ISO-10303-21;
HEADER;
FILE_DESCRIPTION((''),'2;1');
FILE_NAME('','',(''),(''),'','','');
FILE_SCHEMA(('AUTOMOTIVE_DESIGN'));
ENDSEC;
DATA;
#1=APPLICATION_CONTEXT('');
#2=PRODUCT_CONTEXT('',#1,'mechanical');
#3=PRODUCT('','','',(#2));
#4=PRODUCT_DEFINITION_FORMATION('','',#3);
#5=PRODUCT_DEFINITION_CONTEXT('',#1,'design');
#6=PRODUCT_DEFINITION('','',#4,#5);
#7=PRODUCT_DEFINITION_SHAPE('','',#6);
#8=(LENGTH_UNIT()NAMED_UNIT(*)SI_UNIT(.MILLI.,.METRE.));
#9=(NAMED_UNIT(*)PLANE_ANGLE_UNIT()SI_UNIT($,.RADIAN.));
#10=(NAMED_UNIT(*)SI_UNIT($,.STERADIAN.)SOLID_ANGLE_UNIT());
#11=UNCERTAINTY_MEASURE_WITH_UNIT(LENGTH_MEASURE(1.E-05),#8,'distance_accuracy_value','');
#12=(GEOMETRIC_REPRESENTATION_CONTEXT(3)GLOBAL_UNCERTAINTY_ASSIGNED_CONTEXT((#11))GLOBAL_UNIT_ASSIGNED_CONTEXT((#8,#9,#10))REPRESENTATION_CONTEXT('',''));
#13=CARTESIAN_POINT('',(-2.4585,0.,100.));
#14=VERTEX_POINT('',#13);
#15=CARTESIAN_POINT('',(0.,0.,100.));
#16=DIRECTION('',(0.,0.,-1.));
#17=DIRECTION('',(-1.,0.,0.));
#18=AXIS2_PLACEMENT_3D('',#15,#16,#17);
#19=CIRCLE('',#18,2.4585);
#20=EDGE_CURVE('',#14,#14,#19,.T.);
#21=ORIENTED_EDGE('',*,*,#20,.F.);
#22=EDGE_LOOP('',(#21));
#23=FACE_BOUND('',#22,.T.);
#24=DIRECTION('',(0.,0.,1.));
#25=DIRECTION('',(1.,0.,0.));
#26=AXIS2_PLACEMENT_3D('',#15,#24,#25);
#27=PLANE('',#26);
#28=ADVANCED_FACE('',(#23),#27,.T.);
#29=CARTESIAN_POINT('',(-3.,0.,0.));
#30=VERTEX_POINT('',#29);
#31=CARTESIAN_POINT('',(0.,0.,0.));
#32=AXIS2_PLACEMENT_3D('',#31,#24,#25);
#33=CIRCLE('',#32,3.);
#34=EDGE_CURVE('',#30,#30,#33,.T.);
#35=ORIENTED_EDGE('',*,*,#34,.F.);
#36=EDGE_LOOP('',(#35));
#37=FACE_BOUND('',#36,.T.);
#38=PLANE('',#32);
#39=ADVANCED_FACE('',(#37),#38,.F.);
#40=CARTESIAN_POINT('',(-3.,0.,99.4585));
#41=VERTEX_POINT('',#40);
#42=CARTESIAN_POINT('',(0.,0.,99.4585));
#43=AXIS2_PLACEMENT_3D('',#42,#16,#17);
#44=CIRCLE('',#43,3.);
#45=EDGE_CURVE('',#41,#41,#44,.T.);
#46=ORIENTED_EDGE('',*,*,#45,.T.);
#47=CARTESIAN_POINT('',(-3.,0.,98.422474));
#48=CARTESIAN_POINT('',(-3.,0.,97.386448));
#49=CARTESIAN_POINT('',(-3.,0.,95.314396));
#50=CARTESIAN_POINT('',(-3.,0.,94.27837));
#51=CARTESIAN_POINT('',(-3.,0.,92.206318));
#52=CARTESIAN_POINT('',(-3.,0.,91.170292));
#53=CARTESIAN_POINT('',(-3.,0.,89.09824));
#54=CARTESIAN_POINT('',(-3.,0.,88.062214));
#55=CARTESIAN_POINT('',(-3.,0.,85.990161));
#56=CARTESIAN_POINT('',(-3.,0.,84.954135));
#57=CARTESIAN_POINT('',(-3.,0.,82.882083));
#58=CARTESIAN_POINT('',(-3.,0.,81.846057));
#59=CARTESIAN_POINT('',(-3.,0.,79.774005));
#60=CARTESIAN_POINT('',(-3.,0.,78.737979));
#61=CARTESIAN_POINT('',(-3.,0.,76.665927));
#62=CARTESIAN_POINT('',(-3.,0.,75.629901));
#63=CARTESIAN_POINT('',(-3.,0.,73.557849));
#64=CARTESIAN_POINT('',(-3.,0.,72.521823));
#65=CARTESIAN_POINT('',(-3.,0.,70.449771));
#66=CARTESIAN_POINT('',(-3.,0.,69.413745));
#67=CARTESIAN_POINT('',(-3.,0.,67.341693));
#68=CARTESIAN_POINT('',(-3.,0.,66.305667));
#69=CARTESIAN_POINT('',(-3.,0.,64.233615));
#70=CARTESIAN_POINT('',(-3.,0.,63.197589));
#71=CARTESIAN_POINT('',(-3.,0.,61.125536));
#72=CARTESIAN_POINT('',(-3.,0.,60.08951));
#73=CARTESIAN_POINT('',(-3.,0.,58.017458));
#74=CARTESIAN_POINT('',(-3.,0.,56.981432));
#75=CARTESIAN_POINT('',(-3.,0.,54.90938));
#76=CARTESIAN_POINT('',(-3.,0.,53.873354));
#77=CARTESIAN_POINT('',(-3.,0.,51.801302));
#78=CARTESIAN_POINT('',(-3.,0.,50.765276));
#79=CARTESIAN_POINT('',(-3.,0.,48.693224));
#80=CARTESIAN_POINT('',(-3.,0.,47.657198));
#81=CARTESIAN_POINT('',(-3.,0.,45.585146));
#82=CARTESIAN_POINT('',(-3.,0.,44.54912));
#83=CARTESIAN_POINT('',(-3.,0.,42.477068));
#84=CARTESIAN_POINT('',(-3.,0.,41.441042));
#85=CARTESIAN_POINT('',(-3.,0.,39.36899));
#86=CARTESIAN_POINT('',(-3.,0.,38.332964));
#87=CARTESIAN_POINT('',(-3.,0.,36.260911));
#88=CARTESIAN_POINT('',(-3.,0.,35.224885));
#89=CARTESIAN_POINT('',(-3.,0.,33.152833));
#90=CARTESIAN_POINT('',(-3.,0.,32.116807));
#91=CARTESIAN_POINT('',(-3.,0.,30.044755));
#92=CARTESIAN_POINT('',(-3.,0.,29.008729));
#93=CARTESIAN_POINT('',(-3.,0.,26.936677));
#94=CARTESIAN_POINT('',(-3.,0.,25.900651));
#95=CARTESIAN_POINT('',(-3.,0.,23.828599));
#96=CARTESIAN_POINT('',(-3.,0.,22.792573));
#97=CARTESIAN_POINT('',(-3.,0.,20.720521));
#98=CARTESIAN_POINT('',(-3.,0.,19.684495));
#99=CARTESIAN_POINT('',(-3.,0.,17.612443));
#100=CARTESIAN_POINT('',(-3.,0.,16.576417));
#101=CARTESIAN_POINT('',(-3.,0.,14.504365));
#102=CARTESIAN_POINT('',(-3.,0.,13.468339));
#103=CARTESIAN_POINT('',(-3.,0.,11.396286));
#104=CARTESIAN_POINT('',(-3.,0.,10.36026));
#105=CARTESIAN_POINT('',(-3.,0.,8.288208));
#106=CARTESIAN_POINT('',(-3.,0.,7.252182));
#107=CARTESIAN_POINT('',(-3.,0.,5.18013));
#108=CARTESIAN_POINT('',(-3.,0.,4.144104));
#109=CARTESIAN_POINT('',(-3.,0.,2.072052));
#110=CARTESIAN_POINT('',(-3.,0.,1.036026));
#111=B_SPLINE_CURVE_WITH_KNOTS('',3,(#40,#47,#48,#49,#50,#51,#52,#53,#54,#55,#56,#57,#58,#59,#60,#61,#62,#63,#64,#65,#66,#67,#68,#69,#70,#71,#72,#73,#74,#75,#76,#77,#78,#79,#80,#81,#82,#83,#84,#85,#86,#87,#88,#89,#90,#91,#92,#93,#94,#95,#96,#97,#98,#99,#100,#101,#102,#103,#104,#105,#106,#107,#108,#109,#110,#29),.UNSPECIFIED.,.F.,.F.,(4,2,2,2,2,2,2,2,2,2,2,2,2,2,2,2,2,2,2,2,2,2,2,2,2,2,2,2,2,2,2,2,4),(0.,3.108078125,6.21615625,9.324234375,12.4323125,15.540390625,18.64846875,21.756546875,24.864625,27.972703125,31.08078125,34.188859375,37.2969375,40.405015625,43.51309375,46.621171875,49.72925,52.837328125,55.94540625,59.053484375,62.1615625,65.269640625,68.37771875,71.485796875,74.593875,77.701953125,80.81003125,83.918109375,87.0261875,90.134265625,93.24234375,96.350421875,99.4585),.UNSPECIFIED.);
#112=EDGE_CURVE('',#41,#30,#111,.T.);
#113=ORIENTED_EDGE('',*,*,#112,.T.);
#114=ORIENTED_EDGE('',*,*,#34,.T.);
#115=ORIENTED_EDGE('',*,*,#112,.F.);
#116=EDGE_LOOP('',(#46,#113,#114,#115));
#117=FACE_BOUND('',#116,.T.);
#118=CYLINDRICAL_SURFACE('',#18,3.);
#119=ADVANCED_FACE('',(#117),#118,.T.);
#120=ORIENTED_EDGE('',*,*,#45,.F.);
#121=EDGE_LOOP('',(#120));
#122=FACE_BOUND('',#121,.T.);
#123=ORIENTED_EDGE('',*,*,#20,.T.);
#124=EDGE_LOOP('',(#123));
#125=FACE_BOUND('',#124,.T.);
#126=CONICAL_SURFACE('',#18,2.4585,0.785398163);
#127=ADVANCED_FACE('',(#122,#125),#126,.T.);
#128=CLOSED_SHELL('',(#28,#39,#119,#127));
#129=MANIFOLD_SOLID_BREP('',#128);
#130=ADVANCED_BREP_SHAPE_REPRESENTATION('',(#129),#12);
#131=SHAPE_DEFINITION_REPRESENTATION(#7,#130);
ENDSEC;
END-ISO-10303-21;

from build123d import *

# Parameters (mm, degrees)
SKETCH_1_R      = 3
EXTRUDE_1_DEPTH = 100


# Read off the part's stored shape, not the designer's step: M6 机械螺纹 螺柱1
with BuildPart() as part:
    # 草图1 → 凸台-拉伸1 (new body)
    with BuildSketch(Plane.XY):
        with Locations(Location((0, 0, 0), (0, 0, 180))):
            Circle(SKETCH_1_R)
    extrude(amount=EXTRUDE_1_DEPTH)

    # M6 机械螺纹 螺柱1 outline → M6 机械螺纹 螺柱1 (revolve, cut)
    with BuildSketch(Plane.XZ):
        Polygon((3, 100), (2.4585, 100), (3, 99.4585), align=None)
    revolve(axis=Axis((0, 0, 0), (0, 0, 1)), mode=Mode.SUBTRACT)


solid = part.part
